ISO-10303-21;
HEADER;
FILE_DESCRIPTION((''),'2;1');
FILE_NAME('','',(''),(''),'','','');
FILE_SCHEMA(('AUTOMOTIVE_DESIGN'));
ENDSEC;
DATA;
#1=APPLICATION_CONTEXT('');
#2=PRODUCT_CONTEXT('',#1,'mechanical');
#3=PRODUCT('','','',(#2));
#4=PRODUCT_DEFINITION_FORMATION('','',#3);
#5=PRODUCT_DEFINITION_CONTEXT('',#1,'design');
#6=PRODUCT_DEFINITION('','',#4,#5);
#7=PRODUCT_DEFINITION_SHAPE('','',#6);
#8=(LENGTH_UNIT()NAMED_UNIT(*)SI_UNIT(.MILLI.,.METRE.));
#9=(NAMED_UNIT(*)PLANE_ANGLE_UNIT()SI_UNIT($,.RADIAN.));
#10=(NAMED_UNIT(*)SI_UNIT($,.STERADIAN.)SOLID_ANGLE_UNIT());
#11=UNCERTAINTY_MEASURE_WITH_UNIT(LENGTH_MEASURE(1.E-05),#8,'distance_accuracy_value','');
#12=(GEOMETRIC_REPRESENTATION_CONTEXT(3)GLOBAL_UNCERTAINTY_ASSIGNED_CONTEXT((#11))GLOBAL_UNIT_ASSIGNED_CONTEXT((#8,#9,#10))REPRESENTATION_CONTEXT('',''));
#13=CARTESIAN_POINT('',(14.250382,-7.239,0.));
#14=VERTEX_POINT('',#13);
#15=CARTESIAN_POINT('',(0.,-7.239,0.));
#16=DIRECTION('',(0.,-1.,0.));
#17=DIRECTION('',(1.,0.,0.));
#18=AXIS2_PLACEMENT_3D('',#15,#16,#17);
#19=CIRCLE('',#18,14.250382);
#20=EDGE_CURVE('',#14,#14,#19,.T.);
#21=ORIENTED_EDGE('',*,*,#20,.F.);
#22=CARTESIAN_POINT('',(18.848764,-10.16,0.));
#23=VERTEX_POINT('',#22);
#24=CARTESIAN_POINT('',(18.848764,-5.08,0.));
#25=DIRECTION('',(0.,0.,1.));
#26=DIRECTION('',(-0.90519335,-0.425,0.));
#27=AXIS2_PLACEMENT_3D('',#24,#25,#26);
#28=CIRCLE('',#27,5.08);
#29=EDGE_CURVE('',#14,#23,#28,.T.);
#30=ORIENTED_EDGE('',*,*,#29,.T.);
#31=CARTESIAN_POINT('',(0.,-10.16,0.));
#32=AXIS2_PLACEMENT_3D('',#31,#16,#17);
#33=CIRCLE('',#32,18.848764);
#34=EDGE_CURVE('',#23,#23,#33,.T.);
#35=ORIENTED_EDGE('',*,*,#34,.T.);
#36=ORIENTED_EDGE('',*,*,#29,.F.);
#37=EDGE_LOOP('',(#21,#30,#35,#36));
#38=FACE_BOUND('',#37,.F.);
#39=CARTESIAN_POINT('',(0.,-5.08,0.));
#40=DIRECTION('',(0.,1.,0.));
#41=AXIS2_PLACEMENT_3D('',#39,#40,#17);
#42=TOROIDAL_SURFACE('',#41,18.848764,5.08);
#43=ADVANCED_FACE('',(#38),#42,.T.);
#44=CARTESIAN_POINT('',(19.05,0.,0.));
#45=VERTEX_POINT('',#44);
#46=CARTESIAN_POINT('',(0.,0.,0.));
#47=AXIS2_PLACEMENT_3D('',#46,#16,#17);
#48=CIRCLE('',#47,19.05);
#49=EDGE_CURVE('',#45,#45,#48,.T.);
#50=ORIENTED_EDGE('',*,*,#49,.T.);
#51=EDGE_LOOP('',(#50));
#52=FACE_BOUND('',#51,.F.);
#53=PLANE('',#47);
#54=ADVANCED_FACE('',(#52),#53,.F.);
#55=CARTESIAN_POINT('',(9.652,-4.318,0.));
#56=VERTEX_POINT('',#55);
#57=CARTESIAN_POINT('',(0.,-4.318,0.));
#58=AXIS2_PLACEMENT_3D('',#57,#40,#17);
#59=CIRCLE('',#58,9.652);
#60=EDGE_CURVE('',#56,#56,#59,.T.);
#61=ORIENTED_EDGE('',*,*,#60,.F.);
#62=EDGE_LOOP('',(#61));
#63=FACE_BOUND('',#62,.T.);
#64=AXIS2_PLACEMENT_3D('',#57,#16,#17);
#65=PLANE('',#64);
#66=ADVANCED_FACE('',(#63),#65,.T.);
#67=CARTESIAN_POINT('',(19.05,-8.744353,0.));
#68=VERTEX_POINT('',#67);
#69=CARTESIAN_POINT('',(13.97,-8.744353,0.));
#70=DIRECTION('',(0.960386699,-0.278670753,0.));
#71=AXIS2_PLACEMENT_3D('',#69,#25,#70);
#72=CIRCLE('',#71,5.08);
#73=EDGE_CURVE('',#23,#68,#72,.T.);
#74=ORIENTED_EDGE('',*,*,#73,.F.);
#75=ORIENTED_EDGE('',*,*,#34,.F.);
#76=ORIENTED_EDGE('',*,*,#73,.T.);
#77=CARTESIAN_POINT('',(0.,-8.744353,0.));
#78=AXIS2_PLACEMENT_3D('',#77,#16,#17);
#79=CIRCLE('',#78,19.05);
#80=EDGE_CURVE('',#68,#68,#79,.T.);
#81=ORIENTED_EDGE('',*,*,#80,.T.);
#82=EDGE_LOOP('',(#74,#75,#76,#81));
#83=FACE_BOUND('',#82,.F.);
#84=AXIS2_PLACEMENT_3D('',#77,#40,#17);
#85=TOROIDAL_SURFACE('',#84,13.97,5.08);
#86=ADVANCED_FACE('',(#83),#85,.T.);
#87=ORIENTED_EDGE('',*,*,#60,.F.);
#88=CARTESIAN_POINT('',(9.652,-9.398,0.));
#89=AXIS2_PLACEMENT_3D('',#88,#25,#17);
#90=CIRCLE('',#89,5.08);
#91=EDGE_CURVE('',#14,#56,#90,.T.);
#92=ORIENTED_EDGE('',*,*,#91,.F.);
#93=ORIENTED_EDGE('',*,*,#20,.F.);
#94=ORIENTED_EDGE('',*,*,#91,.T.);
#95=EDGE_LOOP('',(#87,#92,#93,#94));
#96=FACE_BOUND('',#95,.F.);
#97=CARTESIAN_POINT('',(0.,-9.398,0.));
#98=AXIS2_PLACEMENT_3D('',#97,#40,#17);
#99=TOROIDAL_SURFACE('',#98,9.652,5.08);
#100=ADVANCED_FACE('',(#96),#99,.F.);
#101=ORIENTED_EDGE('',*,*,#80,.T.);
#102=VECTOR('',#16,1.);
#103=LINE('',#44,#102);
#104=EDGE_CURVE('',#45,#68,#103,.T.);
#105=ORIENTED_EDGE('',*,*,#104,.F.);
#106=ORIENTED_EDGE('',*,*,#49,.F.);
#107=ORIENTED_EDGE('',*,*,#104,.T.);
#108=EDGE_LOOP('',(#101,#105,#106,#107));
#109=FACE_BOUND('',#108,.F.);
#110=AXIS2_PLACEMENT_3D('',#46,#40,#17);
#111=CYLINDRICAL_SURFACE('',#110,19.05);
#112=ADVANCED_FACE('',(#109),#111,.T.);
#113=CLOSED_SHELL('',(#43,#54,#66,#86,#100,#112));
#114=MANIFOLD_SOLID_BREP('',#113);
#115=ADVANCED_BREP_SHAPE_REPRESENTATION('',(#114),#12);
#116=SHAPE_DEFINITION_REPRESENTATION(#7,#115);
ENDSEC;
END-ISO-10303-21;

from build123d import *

# Parameters (mm, degrees)
F0_R     = 19.05
F1_DEPTH = 10.16
F2_T     = -4.318
F3_R     = 5.08


# Not quite as in the source:
# - a fillet or chamfer that OpenCascade refuses, or shapes differently, is made with other operations: its cross-section is extruded or revolved along the edge and cut away or added


with BuildPart() as f1:
    # F0 (on Front) → F1 (new body)
    with BuildSketch(Plane.XZ):
        Circle(F0_R)
    extrude(amount=F1_DEPTH)

    # F2
    f2_openings = [f1.faces().sort_by_distance(p)[0] for p in [
        (0, -10.16, 0),
    ]]
    offset(amount=F2_T, openings=f2_openings)

    # F3
    f3_edges = [f1.edges().sort_by_distance(p)[0] for p in [
        (-14.732, -4.318, 0),
    ]]
    fillet(f3_edges, radius=F3_R)

    # F4: fillet of radius 5.08 on 1 edges, made by hand

    # F4_s1 → F4_t2 (revolve, cut)
    with BuildSketch(Plane.XY):
        with BuildLine():
            ThreePointArc((14.2503822155, -7.239), (16.1249178862, -9.3680135261), (18.848764431, -10.16))
            Line((18.848764431, -10.16), (18.848764431, -10.668))
            Line((18.848764431, -10.668), (14.732, -10.668))
            Line((14.732, -10.668), (14.224, -10.16))
            ThreePointArc((14.224, -10.16), (14.224, -9.398), (13.790543994, -7.4549))
            Line((13.790543994, -7.4549), (14.2503822155, -7.239))
        make_face()
    revolve(axis=Axis((0, -10.16, 0), (0, -1, 0)), mode=Mode.SUBTRACT)

    # F5: fillet of radius 5.08 on 1 edges, made by hand

    # F5_s1 → F5_t2 (revolve, cut)
    with BuildSketch(Plane.XY):
        with BuildLine():
            ThreePointArc((18.848764431, -10.16), (18.9994394971, -9.4592919765), (19.05, -8.7443525768))
            Line((19.05, -8.7443525768), (19.05, -10.16))
            Line((19.05, -10.16), (18.848764431, -10.16))
        make_face()
    revolve(axis=Axis((0, -10.16, 0), (0, -1, 0)), mode=Mode.SUBTRACT)


solid = f1.part
